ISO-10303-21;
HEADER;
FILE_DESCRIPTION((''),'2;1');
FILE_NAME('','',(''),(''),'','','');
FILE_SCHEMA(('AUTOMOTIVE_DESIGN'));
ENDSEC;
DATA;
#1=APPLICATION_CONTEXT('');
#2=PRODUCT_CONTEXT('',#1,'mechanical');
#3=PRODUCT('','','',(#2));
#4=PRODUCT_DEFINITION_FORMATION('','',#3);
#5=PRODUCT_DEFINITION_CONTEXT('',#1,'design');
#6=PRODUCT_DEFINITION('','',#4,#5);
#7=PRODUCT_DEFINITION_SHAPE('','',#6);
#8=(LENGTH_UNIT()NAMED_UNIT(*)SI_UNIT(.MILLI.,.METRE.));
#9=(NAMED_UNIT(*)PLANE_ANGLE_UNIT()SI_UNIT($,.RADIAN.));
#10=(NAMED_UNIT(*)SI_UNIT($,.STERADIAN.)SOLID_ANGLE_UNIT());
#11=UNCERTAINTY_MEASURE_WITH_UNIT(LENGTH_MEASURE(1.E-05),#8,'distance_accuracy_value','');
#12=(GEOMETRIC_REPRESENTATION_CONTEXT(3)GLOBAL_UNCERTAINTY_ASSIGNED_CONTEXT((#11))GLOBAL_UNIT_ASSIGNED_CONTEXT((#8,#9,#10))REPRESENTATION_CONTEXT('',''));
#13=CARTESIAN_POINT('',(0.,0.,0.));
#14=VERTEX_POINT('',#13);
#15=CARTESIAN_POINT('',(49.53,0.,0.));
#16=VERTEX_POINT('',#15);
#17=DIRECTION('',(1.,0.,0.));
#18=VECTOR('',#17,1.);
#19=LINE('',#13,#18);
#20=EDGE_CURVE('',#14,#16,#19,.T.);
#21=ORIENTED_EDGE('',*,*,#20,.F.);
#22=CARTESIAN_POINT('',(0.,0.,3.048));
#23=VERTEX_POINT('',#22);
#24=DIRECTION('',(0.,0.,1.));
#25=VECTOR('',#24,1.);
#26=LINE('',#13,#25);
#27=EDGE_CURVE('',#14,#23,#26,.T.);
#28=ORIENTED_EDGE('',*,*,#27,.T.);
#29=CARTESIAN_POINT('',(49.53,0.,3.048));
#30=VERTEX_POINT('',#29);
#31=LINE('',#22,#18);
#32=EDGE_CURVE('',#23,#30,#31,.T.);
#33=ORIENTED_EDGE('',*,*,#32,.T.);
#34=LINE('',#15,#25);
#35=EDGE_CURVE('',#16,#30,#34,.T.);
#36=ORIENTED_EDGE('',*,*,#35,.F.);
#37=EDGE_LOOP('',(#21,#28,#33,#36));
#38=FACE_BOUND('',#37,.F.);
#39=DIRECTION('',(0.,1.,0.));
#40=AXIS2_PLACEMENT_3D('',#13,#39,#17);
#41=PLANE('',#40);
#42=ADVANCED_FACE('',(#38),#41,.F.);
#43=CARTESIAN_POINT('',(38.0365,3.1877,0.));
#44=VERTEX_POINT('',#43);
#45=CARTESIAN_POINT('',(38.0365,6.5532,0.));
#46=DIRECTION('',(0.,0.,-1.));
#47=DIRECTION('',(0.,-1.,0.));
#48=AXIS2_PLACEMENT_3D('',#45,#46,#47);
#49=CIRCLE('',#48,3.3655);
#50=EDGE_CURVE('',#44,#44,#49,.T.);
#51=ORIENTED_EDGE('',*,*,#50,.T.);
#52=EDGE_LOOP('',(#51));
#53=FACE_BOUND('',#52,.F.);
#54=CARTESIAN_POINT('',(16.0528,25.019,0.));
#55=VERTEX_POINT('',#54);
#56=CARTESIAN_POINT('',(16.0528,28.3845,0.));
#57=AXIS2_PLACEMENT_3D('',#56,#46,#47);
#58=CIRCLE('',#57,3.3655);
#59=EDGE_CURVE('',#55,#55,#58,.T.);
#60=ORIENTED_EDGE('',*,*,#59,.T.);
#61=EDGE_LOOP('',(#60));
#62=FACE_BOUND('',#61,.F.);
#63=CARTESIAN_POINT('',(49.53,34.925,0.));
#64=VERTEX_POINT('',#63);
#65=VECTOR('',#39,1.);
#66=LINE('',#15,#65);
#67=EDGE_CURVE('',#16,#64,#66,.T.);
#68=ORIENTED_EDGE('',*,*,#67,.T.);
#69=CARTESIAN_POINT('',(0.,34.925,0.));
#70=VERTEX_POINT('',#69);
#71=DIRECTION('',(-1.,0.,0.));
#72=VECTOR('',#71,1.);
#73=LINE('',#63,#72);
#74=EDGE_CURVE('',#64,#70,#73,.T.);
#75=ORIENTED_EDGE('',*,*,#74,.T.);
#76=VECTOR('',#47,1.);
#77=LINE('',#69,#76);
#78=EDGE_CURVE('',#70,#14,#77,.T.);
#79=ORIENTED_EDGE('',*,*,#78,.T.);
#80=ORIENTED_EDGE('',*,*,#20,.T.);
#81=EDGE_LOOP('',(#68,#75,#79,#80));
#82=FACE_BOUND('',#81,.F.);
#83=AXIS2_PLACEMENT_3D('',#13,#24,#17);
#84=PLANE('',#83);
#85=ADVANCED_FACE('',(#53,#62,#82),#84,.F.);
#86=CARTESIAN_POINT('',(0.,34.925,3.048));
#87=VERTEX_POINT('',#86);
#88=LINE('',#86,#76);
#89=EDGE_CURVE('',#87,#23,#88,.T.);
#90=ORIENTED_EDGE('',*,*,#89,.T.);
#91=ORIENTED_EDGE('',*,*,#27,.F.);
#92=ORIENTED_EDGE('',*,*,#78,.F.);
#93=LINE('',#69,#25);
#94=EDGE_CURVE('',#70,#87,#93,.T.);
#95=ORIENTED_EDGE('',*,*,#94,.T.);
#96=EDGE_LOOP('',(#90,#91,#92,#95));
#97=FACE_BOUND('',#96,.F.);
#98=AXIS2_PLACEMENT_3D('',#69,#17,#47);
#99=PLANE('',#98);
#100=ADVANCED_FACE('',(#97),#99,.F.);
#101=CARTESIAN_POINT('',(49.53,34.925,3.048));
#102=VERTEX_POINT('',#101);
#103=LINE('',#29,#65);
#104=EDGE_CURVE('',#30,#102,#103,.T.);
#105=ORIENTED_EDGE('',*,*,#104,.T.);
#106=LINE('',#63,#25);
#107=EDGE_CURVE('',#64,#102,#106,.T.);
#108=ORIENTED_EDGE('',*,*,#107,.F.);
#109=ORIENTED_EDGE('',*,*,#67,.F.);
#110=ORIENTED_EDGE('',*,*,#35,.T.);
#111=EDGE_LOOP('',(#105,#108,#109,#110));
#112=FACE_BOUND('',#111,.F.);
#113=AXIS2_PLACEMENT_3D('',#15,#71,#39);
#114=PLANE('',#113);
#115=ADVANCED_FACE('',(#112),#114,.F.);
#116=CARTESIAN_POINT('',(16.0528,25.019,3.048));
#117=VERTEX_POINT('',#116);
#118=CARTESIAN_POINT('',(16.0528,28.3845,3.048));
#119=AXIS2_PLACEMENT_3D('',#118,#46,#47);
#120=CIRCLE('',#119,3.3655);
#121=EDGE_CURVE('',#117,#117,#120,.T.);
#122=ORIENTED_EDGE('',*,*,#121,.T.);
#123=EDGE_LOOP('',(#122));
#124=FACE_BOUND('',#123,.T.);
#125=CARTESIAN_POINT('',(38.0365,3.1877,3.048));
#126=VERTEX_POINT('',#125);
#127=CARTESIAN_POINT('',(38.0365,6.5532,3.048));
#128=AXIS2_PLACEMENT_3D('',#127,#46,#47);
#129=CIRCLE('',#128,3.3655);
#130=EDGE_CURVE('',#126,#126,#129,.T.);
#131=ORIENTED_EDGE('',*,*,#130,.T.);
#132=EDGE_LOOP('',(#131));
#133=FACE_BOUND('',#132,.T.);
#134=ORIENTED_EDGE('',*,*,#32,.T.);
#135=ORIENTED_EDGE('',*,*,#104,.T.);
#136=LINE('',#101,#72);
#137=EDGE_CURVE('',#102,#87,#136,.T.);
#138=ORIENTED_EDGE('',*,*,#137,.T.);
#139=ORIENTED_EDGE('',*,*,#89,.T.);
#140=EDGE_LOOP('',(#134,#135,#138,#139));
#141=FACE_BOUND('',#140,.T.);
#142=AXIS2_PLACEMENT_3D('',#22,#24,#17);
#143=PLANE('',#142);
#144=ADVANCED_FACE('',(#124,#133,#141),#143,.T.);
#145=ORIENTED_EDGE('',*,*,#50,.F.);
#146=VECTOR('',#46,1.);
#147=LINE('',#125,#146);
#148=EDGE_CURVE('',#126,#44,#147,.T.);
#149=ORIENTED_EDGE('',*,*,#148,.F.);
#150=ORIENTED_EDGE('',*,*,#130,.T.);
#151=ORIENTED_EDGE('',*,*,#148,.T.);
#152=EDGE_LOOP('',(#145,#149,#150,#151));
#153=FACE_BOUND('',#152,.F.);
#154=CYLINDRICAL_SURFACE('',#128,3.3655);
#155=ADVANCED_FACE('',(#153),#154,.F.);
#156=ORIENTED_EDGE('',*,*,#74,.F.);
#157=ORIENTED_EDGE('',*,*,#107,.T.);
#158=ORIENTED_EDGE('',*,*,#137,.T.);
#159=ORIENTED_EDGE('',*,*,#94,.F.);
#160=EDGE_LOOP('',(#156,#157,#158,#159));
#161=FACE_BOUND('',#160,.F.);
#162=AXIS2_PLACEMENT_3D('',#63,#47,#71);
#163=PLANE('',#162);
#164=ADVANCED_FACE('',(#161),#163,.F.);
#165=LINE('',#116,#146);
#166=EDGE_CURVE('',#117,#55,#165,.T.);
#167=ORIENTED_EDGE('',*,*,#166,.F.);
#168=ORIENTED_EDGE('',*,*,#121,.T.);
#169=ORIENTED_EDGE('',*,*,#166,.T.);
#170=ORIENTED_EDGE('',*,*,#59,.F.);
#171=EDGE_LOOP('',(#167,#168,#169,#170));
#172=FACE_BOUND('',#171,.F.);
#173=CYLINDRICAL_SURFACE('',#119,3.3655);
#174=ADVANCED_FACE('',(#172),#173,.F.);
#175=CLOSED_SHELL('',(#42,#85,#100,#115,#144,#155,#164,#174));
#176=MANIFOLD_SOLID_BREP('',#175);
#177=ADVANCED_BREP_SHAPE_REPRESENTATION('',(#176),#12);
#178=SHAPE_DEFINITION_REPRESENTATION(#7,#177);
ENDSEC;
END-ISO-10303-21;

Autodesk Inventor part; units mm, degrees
ref_plane "YZ Plane" through (0, 0, 0) normal (1, 0, 0) x (0, 1, 0)
ref_plane "XZ Plane" through (0, 0, 0) normal (0, 1, 0) x (-1, 0, 0)
ref_plane "XY Plane" through (0, 0, 0) normal (0, 0, 1) x (1, 0, 0)
sketch "Sketch1" plane through (0, 0, 0) normal (0, 0, 1) x (1, 0, 0)
  line L0 (0, 0) -> (49.53, 0)
  line L1 (49.53, 0) -> (49.53, 34.925)
  line L2 (49.53, 34.925) -> (0, 34.925)
  line L3 (0, 34.925) -> (0, 0)
  dimension "d0" = 49.53
  dimension "d1" = 34.925
extrude "Plate1" add sketch "Sketch1" along normal blind 3.048
hole "Hole1" at (38.0365, 6.5532, 3.048) direction (0, 0, -1) diameter 6.731 end through all
hole "Hole2" at (16.0528, 28.3845, 3.048) direction (0, 0, -1) diameter 6.731 end through all
equation "\"d10\" = Thickness"
equation "\"d20\" = Thickness"
equation "\"BendRadius\" = Thickness"
equation "\"BendReliefWidth\" = Thickness"
equation "\"BendReliefDepth\" = 0.5 * Thickness"
equation "\"CornerReliefSize\" = 4 * Thickness"
equation "\"MinimumRemnant\" = 2 * Thickness"
equation "\"TransitionRadius\" = BendRadius"
equation "\"JacobiRadiusSize\" = BendRadius"
equation "\"GapSize\" = Thickness"
equation "\"d2\" = BendRadius"
equation "\"Thickness\" = 3.048"
properties part number "Claw - Arm - Plate 2"
